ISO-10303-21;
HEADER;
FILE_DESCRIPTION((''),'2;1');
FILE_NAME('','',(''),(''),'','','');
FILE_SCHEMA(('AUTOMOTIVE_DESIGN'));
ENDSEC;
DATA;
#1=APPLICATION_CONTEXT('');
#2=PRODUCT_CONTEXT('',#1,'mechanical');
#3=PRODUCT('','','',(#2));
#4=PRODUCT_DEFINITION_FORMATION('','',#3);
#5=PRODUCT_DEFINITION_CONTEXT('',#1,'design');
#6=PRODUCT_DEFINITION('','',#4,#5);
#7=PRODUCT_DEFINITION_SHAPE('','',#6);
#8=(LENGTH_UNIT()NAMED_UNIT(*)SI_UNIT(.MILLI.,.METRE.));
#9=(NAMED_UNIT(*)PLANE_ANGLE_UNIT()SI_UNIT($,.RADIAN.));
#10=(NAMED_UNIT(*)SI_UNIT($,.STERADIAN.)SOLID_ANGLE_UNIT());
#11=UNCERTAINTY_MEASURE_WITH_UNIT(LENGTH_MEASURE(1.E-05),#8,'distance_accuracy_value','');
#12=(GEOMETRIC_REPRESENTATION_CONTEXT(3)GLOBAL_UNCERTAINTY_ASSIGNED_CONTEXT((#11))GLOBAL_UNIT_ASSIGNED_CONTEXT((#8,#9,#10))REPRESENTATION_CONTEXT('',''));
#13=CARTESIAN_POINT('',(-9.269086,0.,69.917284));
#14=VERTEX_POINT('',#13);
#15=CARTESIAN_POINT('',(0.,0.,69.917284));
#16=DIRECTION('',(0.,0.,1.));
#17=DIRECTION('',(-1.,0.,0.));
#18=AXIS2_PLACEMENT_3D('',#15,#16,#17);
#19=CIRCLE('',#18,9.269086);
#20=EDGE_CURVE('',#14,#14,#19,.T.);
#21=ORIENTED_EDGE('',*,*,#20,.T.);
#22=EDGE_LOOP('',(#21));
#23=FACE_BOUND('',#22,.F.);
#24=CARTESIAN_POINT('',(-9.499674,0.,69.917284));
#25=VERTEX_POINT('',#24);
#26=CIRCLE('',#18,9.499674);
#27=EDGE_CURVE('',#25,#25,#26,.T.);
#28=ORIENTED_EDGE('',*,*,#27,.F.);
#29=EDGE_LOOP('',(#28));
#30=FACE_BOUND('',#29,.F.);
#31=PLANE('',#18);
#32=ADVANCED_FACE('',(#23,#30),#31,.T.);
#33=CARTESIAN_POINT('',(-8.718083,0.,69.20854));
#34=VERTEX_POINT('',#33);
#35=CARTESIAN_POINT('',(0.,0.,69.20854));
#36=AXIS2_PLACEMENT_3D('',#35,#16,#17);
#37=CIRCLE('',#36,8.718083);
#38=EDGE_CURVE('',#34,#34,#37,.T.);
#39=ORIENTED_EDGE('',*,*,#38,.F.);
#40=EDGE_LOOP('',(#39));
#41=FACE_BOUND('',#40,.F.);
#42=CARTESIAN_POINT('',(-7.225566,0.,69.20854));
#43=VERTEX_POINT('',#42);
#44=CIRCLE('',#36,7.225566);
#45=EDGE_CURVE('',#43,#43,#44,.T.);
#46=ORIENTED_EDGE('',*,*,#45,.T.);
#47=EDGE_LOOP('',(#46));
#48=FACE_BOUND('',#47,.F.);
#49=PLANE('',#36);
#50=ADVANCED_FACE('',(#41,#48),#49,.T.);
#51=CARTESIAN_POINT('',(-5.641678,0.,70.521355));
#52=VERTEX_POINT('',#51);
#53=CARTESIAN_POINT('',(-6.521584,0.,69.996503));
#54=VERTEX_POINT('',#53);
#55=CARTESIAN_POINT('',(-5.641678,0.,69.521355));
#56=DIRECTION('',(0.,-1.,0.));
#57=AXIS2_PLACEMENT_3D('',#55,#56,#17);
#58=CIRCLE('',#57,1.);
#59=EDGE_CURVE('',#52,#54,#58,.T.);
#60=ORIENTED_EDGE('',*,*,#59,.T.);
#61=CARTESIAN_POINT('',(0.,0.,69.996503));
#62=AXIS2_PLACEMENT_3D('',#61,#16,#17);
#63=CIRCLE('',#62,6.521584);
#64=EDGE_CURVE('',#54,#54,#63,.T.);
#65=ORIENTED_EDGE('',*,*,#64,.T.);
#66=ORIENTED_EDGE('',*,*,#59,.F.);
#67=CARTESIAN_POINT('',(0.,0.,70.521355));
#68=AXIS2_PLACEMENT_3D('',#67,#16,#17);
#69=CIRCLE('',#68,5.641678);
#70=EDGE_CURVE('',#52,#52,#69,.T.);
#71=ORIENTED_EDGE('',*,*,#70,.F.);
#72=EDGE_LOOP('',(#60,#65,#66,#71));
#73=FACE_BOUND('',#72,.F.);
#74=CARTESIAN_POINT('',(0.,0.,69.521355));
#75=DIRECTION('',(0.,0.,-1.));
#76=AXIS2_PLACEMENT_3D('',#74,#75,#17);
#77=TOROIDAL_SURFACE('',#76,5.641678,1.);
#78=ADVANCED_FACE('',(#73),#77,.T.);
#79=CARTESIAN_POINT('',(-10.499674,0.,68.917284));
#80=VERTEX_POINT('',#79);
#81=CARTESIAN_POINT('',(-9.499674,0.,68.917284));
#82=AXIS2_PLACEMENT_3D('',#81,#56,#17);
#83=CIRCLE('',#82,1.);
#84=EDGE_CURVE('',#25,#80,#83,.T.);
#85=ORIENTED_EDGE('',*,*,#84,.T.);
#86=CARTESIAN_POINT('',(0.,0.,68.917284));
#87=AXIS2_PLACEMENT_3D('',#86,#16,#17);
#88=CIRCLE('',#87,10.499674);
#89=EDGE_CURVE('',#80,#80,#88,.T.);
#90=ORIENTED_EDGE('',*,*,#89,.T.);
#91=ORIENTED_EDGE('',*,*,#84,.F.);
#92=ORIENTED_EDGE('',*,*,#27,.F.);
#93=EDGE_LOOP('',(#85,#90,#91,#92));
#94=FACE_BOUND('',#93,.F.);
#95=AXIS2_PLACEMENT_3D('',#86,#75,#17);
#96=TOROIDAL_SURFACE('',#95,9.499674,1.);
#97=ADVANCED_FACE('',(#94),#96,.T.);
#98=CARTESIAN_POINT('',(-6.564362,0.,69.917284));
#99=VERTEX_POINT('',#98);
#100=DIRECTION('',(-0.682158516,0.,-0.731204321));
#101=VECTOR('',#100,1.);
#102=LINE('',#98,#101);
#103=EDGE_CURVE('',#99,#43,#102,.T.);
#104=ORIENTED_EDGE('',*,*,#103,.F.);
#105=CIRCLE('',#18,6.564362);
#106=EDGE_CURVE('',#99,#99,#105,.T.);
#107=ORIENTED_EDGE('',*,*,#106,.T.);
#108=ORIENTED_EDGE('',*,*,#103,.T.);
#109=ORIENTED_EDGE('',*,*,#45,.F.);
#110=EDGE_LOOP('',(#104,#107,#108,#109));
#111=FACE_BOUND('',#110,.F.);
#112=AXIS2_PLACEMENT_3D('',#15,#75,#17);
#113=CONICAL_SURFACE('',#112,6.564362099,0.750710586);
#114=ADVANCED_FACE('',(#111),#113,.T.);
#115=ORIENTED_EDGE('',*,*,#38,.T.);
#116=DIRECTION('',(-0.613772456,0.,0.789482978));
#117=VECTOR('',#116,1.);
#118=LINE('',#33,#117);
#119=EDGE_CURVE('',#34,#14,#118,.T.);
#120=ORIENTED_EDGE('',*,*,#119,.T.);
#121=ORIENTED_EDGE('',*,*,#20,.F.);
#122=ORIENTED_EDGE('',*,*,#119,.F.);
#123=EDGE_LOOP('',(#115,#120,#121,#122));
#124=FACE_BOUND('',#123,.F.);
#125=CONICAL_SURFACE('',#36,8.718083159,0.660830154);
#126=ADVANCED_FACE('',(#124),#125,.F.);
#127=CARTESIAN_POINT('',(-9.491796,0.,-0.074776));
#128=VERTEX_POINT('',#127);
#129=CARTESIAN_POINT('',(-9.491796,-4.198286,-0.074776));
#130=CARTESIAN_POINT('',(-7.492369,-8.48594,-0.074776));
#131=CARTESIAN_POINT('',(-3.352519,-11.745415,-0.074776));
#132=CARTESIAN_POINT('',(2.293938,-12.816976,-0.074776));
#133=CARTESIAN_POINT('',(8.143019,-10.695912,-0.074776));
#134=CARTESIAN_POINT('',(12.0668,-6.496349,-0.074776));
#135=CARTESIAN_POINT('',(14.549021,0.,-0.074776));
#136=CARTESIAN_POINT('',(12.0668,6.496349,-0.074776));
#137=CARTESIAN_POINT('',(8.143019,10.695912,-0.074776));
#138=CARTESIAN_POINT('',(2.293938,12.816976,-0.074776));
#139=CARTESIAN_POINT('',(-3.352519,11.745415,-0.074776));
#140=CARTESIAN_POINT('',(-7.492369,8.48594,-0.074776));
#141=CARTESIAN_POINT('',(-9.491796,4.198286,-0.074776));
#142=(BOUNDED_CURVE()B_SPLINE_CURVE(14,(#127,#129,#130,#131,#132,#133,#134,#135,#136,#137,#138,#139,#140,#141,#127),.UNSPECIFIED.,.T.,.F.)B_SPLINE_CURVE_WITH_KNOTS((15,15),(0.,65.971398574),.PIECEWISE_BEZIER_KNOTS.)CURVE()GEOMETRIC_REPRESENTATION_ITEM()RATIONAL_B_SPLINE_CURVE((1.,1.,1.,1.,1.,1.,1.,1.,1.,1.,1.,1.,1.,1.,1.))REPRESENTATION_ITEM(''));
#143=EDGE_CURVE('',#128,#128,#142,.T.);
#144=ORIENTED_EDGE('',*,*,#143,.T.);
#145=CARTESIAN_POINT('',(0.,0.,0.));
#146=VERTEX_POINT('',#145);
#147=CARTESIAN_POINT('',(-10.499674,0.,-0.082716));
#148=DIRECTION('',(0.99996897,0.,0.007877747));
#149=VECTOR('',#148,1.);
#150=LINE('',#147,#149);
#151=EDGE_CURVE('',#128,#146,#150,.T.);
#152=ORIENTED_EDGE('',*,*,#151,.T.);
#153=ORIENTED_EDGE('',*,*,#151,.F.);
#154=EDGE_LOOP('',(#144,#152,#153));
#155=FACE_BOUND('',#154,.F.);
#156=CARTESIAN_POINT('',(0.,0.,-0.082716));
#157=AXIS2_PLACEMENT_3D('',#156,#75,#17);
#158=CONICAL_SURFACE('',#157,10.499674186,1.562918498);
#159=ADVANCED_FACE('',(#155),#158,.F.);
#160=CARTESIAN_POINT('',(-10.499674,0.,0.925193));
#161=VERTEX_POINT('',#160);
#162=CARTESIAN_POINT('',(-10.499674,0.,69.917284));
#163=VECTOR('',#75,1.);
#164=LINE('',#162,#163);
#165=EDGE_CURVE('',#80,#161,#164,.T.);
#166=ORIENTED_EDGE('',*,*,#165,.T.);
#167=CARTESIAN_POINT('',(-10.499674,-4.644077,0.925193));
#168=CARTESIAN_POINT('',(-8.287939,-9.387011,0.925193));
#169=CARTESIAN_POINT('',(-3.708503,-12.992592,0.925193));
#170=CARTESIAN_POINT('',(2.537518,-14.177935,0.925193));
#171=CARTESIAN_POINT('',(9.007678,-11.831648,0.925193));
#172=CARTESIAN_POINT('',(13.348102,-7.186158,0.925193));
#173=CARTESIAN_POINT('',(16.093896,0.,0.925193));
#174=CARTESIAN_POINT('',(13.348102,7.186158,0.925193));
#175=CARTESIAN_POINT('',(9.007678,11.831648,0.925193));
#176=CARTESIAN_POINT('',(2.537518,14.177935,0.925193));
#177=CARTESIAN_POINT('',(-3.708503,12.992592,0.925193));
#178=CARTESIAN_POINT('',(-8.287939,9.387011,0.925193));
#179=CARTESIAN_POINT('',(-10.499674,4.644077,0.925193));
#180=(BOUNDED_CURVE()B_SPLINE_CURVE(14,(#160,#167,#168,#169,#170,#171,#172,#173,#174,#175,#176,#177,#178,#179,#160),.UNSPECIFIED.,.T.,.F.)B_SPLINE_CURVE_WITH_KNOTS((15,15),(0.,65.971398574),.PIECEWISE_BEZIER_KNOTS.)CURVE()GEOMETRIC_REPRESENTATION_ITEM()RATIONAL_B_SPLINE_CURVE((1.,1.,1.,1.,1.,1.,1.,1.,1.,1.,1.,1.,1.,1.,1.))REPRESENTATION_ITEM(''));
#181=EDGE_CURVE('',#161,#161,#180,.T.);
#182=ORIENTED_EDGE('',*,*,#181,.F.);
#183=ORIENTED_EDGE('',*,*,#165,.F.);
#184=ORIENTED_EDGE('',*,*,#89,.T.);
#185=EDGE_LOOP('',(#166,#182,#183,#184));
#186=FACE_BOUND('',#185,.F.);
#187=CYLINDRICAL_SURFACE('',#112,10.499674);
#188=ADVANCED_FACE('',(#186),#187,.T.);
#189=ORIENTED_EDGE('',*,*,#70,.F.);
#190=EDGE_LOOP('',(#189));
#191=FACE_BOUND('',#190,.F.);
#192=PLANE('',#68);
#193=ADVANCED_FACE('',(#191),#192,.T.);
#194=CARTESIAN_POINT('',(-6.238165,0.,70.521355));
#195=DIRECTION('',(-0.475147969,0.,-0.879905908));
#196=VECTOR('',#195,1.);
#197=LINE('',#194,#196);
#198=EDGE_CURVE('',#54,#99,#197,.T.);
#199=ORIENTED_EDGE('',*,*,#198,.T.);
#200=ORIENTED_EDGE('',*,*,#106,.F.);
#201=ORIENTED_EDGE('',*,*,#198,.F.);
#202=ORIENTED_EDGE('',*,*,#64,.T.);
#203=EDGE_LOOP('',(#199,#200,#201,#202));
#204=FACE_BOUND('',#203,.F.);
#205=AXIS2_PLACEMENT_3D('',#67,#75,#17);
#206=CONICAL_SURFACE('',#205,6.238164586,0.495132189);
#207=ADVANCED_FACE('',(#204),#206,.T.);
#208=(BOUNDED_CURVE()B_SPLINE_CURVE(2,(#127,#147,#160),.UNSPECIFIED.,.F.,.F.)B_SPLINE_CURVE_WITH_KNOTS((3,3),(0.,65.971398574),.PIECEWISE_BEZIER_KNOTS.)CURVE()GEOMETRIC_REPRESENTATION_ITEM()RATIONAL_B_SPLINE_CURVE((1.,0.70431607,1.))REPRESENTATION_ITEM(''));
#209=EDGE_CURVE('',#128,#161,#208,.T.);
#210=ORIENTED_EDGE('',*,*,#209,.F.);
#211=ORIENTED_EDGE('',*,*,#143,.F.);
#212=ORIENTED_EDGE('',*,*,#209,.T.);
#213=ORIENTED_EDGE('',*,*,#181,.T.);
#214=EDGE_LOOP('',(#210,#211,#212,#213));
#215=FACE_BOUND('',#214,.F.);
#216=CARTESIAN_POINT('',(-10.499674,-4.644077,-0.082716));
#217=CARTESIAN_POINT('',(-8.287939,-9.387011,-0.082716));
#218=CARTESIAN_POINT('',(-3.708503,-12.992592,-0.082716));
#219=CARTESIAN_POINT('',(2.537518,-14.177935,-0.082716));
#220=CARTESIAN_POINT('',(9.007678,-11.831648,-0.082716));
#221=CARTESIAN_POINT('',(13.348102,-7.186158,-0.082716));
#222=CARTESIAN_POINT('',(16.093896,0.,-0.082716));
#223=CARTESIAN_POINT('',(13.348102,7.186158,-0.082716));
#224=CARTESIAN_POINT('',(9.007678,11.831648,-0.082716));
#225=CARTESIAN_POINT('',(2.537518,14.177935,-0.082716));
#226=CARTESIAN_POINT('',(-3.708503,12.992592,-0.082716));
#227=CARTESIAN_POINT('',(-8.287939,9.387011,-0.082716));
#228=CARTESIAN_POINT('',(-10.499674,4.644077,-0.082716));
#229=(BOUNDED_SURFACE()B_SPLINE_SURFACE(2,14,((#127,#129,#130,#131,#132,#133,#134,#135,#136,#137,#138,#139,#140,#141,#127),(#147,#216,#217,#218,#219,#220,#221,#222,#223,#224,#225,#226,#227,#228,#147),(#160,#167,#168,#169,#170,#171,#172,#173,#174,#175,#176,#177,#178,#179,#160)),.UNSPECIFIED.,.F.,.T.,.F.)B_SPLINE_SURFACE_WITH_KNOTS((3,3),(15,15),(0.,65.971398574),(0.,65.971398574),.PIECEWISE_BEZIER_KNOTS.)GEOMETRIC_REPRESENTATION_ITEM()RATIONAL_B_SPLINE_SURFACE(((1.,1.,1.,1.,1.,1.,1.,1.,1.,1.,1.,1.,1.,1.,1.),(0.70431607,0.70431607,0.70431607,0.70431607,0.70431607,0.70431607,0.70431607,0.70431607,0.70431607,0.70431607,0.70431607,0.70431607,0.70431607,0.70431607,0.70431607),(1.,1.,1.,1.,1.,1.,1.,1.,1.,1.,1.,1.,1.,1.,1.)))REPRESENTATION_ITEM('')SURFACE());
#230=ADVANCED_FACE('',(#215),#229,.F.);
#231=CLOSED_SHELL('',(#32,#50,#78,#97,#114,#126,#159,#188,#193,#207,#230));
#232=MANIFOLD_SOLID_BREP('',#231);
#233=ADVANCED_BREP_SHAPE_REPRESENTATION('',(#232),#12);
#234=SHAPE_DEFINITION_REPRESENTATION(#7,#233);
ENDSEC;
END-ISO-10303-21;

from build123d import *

# Parameters (mm, degrees)
F2_R = 1


# Not quite as in the source:
# - two fillets or chamfers of one size are made in one step


with BuildPart() as f1:
    # F0 (on Front) → F1 (revolve)
    with BuildSketch(Plane.XZ):
        Polygon((-10.4996741857, -0.0827163458), (0, 0), (0, 69.9172836542), (0, 70.5213546753), (-6.2381645857, 70.5213546753), (-6.5643620988, 69.9172836542), (-7.2255664847, 69.2085400224), (-8.7180831586, 69.2085400224), (-9.2690859436, 69.9172836542), (-10.4996741857, 69.9172836542), align=None)
    revolve(axis=Axis((0, 0, 34.9586418271), (0, 0, 1)))

    # F2
    f2_edges = [f1.edges().sort_by_distance(p)[0] for p in [
        (10.499674, 0, -0.082716),
        (6.238165, 0, 70.521355),
        (10.499674, 0, 69.917284),
    ]]
    fillet(f2_edges, radius=F2_R)


solid = f1.part
